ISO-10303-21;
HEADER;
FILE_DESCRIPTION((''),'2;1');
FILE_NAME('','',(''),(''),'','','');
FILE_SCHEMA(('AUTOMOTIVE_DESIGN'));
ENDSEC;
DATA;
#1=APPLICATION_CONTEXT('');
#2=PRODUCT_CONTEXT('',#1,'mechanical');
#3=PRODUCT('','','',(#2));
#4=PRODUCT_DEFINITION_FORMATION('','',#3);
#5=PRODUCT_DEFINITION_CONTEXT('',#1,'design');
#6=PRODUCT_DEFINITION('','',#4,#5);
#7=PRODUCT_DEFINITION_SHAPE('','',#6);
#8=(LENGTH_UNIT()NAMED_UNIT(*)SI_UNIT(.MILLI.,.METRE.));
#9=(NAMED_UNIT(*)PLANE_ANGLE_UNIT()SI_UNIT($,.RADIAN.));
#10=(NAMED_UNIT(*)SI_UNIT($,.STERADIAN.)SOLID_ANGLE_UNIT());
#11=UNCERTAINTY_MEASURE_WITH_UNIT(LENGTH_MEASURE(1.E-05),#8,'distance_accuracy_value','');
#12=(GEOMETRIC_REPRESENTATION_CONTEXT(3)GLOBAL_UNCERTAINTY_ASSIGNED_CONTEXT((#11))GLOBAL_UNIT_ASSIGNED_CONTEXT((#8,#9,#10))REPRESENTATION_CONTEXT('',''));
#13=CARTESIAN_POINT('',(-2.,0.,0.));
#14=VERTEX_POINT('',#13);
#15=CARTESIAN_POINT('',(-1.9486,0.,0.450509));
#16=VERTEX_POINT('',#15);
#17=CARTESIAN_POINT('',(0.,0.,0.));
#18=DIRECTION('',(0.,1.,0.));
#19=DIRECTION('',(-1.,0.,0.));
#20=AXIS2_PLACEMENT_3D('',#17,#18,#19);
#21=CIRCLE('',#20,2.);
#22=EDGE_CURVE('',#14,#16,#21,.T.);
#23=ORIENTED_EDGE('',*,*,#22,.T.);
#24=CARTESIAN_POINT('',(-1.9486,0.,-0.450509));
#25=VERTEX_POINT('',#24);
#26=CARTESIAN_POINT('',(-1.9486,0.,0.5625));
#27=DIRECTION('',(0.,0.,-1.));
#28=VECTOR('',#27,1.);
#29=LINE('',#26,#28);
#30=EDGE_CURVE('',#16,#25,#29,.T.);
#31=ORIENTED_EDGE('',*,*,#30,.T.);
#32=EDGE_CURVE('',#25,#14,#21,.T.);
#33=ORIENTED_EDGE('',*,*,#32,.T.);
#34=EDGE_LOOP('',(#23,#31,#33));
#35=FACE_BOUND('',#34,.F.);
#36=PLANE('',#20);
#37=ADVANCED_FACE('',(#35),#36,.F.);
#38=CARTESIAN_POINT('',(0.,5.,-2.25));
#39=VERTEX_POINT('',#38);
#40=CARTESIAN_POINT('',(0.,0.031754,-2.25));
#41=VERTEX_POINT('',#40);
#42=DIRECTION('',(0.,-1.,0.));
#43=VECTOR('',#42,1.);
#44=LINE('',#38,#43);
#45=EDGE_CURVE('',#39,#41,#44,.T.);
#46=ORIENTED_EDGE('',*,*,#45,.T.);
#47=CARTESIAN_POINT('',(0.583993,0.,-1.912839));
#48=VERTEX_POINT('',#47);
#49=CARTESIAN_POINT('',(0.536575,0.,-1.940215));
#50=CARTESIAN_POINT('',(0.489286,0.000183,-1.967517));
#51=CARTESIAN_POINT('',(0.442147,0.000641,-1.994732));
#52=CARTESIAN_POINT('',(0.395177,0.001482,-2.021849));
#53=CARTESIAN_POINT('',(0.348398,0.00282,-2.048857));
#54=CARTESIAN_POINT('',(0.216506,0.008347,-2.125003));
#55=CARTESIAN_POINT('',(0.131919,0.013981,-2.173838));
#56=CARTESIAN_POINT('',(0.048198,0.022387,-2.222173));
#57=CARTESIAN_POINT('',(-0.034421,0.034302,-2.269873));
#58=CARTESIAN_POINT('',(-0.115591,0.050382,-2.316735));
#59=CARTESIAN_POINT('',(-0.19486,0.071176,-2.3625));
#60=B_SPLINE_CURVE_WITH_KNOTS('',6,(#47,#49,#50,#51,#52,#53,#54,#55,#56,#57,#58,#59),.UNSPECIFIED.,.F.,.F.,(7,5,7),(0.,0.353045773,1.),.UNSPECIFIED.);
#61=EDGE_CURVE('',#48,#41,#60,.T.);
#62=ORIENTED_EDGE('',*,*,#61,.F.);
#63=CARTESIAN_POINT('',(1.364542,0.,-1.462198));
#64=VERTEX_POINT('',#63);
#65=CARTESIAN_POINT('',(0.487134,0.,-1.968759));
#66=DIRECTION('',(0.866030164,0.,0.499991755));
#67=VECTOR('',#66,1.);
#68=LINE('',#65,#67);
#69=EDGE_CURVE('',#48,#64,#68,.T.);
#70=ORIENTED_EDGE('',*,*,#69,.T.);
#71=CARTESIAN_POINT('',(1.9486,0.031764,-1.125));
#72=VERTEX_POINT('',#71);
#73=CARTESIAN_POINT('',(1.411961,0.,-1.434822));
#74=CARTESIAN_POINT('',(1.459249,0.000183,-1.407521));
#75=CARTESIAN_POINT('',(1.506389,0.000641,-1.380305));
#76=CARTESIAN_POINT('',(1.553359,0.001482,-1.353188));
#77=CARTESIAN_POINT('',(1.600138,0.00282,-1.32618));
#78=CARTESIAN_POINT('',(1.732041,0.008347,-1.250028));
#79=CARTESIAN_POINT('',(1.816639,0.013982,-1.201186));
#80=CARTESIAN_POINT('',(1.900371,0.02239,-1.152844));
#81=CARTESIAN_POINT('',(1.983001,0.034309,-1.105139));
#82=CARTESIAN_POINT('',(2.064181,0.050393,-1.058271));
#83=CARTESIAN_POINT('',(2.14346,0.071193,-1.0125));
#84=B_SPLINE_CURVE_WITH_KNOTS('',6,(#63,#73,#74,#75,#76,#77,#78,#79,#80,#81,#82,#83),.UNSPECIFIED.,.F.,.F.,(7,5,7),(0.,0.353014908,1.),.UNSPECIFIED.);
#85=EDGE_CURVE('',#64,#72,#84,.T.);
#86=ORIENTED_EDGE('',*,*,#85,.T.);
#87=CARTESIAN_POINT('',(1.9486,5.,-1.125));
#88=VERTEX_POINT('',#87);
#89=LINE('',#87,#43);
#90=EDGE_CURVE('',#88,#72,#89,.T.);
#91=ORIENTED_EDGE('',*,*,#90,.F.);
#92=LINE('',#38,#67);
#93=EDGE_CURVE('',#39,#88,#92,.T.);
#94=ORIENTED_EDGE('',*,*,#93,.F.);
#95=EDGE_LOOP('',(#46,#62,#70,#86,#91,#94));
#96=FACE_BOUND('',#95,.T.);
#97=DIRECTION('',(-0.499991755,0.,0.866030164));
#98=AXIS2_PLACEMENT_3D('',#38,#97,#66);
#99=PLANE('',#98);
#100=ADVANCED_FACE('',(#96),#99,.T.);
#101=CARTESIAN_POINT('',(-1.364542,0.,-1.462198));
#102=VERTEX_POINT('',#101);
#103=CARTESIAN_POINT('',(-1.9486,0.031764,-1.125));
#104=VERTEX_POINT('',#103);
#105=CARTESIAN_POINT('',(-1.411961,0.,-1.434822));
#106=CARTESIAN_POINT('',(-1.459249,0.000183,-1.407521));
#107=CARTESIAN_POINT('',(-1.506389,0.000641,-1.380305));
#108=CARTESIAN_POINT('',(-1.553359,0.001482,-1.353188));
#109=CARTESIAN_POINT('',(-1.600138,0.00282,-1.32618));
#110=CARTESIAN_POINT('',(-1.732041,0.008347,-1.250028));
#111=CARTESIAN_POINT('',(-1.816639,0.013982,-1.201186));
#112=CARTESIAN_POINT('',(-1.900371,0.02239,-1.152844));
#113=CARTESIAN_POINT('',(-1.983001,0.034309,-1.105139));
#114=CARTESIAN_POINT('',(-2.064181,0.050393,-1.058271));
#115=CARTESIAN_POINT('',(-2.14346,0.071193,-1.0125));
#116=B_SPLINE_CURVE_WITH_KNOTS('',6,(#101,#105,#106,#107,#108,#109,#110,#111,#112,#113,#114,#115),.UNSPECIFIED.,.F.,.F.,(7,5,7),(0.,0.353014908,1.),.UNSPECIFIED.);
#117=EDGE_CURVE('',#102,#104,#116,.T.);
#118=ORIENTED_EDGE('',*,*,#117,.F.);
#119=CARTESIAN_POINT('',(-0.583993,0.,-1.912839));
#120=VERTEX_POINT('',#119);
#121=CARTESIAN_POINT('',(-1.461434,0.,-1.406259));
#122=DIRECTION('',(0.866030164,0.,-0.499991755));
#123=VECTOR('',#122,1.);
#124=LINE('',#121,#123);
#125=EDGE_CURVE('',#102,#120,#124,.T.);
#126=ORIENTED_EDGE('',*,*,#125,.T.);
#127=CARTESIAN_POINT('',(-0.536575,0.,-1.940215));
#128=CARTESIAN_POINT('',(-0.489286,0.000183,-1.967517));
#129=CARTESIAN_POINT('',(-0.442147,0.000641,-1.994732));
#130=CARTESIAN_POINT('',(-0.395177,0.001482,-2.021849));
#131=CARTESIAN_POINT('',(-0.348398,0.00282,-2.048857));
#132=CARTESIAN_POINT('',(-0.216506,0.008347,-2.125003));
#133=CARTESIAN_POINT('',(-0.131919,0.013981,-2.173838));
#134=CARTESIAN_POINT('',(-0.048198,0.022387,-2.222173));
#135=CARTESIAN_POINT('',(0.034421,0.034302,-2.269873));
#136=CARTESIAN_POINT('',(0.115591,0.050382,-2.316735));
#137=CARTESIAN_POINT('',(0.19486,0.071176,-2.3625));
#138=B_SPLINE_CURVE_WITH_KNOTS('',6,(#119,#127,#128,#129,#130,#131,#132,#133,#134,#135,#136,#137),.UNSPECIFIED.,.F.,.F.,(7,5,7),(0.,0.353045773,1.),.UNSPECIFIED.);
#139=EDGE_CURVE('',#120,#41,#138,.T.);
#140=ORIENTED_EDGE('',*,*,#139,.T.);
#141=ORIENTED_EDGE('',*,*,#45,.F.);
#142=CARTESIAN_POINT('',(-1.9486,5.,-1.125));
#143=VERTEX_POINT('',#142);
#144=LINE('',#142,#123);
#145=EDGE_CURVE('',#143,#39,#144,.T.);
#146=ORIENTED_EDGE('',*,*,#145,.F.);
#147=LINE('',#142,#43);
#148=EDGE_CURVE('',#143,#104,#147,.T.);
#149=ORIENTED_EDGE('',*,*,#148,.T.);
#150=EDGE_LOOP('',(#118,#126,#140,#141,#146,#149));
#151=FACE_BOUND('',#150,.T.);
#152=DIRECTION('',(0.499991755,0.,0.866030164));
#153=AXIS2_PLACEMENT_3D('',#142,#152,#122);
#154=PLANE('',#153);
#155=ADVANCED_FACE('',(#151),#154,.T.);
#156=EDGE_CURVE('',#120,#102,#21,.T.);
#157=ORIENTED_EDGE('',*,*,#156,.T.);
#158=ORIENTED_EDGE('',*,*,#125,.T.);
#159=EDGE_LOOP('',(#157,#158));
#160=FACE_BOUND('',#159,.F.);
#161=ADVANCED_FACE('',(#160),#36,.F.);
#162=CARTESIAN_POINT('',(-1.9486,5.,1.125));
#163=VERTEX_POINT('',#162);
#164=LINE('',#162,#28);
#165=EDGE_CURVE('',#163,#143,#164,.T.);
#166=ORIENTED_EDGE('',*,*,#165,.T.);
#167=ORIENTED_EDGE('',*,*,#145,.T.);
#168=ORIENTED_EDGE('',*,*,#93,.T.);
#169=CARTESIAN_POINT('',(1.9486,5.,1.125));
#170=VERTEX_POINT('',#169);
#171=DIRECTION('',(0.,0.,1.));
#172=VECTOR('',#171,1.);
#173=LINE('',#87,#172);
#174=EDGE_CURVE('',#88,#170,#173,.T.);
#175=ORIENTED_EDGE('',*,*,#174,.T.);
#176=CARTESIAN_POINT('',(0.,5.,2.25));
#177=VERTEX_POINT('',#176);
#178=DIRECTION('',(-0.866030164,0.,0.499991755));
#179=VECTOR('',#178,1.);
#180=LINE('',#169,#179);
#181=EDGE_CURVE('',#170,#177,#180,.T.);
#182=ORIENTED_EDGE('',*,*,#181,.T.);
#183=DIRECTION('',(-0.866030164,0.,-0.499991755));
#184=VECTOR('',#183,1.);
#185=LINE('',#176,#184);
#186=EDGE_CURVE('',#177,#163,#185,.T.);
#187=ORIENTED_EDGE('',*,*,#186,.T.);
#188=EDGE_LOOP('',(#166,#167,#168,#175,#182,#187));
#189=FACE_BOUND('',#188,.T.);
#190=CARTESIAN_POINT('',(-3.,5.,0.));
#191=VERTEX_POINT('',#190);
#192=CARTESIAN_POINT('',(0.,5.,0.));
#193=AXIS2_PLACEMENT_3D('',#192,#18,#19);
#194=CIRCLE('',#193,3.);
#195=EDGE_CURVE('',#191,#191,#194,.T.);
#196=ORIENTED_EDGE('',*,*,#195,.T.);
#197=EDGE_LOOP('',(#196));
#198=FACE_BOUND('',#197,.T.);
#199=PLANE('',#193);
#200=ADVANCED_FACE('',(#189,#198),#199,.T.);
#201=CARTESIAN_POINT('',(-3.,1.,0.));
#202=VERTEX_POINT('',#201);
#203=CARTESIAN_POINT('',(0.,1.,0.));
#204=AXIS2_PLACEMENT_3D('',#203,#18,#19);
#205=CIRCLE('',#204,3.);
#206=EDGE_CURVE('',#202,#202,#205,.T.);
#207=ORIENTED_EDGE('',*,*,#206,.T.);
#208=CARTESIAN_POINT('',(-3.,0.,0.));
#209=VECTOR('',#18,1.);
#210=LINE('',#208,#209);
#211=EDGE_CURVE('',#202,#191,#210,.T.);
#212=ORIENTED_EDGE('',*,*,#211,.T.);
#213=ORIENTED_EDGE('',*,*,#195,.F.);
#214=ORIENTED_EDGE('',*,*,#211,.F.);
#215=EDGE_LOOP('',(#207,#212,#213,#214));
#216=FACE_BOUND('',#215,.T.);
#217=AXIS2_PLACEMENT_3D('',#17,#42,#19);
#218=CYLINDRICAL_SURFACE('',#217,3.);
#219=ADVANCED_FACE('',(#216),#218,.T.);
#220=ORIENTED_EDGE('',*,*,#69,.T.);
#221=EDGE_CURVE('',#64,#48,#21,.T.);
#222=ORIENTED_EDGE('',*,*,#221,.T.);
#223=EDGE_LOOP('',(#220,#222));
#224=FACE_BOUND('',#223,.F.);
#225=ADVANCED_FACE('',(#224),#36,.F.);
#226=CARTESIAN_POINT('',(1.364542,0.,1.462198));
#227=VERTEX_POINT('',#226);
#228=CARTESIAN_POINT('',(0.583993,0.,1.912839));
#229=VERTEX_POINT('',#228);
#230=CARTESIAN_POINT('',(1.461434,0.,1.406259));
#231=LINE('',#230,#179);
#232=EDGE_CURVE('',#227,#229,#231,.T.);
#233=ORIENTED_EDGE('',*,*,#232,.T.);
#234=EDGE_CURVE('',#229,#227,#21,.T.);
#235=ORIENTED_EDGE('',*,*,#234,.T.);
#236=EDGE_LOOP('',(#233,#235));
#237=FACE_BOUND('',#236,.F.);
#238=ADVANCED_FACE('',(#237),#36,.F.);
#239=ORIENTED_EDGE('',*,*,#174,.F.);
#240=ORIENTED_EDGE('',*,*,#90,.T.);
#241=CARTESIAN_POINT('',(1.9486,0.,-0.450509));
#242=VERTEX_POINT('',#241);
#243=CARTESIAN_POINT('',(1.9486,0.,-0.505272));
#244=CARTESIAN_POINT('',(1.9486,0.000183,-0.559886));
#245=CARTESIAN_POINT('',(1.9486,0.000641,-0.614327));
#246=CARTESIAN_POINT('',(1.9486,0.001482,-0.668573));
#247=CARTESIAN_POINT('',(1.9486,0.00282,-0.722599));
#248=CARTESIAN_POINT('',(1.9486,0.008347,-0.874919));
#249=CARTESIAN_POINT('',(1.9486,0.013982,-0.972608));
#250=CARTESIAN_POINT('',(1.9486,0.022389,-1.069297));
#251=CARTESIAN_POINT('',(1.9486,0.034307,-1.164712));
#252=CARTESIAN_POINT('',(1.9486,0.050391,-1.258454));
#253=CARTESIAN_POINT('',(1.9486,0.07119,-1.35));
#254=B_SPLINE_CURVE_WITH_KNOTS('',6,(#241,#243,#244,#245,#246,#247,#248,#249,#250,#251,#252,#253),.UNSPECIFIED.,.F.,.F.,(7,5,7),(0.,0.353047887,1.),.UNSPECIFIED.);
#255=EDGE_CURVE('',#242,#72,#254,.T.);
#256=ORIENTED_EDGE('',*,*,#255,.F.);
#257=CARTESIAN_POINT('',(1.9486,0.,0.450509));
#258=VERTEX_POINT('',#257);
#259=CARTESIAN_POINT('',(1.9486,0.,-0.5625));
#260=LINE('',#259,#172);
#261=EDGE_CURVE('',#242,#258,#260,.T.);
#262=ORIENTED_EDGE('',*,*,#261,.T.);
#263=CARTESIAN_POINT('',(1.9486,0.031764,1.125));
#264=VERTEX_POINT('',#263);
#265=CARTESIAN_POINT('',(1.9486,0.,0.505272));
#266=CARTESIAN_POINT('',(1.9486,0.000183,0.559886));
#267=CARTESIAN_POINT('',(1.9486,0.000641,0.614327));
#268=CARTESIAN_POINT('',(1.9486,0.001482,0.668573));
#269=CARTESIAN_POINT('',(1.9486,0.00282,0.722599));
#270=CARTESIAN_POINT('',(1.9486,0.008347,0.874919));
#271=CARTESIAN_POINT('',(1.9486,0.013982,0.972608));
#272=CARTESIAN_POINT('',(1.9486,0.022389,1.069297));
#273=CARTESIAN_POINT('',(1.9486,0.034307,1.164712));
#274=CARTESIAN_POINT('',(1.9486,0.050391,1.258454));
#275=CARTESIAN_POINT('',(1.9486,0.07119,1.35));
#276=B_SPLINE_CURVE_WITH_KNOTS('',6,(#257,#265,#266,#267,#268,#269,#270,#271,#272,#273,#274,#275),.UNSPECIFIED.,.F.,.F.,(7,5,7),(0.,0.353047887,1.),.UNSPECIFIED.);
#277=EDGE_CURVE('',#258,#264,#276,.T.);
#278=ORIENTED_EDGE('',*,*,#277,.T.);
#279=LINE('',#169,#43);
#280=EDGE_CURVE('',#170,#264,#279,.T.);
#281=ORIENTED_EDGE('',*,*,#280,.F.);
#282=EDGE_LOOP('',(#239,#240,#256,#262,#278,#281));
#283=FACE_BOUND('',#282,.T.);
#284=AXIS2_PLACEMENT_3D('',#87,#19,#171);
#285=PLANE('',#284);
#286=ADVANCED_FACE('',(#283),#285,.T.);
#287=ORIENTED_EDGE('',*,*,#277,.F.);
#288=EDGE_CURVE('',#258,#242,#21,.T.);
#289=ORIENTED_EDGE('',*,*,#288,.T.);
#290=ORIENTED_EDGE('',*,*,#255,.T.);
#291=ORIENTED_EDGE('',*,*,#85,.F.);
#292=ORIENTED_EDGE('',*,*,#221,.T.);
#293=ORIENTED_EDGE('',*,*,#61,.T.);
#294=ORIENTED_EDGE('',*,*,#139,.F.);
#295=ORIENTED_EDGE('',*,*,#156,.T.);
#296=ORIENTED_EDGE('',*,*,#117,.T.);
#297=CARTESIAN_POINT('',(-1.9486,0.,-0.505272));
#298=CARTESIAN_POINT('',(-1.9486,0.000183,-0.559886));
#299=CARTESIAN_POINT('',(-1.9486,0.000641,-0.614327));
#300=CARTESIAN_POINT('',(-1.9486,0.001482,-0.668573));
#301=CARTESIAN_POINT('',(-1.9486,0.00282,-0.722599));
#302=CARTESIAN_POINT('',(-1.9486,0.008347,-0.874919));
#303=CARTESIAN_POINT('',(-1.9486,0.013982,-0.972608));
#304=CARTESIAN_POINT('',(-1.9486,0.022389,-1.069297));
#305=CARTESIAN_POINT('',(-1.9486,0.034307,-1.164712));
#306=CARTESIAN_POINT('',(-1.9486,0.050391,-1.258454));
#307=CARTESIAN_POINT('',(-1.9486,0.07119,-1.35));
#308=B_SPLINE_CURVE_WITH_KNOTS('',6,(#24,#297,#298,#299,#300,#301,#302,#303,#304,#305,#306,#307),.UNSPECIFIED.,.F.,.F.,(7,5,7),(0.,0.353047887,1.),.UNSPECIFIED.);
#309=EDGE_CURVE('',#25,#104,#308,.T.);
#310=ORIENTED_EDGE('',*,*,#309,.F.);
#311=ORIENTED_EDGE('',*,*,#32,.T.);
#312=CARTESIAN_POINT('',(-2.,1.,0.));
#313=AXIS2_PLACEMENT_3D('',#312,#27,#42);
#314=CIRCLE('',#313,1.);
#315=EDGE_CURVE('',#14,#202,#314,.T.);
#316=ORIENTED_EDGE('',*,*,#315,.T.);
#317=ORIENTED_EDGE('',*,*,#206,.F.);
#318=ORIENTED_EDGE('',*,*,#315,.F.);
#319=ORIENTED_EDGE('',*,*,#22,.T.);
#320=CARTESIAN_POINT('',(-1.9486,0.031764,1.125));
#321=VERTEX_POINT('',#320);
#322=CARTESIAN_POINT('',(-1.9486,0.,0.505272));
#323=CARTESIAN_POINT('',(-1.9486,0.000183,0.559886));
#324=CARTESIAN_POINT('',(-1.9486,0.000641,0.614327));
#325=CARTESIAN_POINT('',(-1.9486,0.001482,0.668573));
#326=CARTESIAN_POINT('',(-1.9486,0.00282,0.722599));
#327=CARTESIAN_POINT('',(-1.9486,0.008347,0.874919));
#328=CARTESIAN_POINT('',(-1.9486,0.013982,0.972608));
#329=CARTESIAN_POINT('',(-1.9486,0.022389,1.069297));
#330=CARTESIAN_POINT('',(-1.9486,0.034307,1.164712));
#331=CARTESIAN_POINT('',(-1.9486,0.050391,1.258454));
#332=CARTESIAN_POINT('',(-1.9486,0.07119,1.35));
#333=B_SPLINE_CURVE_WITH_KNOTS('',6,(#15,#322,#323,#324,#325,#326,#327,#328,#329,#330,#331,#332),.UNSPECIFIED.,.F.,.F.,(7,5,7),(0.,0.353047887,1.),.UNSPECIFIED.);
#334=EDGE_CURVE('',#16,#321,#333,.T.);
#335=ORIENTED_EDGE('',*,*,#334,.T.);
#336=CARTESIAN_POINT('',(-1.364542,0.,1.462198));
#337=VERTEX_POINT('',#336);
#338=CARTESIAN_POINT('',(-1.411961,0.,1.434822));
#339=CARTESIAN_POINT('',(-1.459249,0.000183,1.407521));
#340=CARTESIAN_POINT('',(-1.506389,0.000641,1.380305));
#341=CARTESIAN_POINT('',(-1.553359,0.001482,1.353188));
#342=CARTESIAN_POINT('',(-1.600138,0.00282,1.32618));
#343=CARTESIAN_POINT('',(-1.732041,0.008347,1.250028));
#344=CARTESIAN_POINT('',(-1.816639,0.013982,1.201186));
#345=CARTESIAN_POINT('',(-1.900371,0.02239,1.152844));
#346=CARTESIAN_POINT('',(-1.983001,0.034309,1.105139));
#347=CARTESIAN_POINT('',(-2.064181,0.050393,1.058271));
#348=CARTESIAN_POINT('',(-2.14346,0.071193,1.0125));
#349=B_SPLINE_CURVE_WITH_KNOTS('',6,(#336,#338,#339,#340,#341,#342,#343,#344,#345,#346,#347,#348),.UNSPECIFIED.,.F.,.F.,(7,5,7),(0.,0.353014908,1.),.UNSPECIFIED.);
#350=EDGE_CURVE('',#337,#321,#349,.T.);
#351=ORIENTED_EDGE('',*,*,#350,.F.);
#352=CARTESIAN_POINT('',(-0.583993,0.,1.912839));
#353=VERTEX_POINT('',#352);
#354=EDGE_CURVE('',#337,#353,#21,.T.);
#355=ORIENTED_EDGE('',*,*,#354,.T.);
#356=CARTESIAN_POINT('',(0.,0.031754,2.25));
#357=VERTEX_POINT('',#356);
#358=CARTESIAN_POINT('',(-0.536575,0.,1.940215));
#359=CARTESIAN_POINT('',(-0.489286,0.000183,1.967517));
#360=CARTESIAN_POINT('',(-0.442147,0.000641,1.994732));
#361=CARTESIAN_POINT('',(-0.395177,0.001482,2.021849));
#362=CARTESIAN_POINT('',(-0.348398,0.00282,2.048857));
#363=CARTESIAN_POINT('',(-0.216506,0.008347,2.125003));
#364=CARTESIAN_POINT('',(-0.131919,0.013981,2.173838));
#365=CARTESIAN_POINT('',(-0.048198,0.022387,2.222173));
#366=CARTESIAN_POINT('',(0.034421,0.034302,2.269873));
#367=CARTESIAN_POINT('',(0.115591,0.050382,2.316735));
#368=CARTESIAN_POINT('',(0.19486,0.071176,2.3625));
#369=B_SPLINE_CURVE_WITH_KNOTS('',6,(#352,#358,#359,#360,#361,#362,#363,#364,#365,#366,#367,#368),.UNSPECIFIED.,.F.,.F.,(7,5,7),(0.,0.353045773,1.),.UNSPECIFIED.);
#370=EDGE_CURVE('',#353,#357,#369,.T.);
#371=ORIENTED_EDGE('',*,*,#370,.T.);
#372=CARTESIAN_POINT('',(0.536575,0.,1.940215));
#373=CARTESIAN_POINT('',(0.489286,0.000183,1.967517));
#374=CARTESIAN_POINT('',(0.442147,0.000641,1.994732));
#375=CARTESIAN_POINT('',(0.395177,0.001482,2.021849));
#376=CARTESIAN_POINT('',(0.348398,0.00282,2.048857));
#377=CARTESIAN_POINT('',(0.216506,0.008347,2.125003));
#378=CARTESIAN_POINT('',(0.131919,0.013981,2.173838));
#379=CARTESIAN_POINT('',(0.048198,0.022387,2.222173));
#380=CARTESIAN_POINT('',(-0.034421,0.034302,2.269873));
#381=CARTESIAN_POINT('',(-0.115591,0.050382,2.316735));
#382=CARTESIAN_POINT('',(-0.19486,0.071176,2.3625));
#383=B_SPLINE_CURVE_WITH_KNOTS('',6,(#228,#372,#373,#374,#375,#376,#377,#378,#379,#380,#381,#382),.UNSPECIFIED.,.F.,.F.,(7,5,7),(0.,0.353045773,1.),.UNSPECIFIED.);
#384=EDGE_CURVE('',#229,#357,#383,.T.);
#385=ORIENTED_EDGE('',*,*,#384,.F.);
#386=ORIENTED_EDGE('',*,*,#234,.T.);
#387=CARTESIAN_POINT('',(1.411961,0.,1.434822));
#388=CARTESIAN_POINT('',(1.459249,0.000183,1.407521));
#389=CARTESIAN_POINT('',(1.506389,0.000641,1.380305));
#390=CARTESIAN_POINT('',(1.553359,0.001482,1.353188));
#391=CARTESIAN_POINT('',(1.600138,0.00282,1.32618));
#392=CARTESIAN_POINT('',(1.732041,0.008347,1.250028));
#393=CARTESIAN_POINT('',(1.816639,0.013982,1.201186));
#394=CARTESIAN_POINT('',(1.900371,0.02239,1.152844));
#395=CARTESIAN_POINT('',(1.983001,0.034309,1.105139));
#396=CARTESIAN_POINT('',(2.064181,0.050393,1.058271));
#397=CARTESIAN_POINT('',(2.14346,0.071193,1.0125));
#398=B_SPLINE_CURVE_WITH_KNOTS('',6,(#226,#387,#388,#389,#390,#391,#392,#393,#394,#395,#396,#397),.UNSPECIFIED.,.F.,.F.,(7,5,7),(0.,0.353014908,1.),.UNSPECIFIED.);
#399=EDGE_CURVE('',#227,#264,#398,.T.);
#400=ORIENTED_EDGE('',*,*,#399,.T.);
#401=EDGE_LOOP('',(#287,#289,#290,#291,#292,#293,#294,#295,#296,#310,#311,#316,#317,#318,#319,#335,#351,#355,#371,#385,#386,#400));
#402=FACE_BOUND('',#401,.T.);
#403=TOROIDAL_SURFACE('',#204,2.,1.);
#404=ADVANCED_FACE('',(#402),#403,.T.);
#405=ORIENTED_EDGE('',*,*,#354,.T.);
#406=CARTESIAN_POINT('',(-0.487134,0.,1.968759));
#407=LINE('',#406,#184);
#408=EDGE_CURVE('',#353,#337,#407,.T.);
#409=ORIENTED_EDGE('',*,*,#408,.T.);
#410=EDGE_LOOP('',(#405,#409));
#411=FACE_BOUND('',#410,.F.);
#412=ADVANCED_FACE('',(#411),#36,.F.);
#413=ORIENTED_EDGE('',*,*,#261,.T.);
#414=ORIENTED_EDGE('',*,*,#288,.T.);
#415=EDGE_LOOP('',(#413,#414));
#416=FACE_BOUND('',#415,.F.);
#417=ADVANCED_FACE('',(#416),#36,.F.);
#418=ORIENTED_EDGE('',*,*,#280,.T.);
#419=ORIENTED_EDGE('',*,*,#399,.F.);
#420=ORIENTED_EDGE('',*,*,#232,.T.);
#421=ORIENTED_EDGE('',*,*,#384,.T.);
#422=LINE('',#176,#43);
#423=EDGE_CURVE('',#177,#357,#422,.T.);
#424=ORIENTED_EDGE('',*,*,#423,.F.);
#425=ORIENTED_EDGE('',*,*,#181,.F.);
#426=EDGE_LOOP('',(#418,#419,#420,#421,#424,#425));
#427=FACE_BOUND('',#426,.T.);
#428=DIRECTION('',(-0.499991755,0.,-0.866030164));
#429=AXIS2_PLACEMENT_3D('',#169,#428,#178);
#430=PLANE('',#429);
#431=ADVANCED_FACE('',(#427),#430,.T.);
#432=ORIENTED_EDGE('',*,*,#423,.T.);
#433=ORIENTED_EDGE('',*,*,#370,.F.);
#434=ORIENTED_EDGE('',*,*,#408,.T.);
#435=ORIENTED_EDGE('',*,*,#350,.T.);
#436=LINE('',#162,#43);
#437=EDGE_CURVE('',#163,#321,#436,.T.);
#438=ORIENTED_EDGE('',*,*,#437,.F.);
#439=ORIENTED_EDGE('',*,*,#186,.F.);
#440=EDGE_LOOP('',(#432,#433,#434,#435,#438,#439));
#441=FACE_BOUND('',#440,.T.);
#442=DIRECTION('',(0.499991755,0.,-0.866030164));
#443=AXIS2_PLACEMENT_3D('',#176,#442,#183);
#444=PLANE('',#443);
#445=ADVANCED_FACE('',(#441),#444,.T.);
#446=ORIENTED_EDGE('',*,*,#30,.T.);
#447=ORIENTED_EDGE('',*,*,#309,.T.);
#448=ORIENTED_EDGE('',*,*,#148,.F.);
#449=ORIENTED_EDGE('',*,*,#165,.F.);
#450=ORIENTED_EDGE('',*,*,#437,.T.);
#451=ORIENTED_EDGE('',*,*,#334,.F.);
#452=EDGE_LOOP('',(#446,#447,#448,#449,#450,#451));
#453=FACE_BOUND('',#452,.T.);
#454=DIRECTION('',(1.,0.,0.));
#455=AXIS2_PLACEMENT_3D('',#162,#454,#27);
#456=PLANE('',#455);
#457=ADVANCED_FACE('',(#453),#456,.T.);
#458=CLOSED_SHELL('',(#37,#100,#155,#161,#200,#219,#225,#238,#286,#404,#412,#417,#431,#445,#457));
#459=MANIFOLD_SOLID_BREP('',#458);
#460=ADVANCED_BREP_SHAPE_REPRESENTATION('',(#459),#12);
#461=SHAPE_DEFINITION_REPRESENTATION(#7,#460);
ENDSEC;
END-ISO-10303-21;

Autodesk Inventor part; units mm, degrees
ref_plane "YZ Plane" through (0, 0, 0) normal (1, 0, 0) x (0, 1, 0)
ref_plane "XZ Plane" through (0, 0, 0) normal (0, 1, 0) x (-1, 0, 0)
ref_plane "XY Plane" through (0, 0, 0) normal (0, 0, 1) x (1, 0, 0)
sketch "Sketch1" plane through (0, 0, 0) normal (0, 1, 0) x (-1, 0, 0)
  circle A0 centre (0, 0) radius 2.25
  circle A1 centre (0, 0) radius 3
  dimension "d0" = 4.5
  dimension "d1" = 6
extrude "Extrusion1" add sketch "Sketch1" along normal blind 5 contours A0 | A1
sketch "Sketch2" plane through (0, 5, 0) normal (0, 1, 0) x (1, 0, 0)
  line L0 (0, 0) -> (0, 2.25)
  line L1 (0, 2.25) -> (1.9486, 1.125)
  line L2 (1.9486, 1.125) -> (1.9486, -1.125)
  line L3 (1.9486, -1.125) -> (0, -2.25)
  line L4 (0, -2.25) -> (-1.9486, -1.125)
  line L5 (-1.9486, -1.125) -> (-1.9486, 1.125)
  line L6 (-1.9486, 1.125) -> (0, 2.25)
  dimension "d4" = 2.25
extrude "Extrusion2" cut sketch "Sketch2" against normal through all
fillet "Fillet2" radius 1 1 edges at (3, 0, 0)
properties part number "Nut"
